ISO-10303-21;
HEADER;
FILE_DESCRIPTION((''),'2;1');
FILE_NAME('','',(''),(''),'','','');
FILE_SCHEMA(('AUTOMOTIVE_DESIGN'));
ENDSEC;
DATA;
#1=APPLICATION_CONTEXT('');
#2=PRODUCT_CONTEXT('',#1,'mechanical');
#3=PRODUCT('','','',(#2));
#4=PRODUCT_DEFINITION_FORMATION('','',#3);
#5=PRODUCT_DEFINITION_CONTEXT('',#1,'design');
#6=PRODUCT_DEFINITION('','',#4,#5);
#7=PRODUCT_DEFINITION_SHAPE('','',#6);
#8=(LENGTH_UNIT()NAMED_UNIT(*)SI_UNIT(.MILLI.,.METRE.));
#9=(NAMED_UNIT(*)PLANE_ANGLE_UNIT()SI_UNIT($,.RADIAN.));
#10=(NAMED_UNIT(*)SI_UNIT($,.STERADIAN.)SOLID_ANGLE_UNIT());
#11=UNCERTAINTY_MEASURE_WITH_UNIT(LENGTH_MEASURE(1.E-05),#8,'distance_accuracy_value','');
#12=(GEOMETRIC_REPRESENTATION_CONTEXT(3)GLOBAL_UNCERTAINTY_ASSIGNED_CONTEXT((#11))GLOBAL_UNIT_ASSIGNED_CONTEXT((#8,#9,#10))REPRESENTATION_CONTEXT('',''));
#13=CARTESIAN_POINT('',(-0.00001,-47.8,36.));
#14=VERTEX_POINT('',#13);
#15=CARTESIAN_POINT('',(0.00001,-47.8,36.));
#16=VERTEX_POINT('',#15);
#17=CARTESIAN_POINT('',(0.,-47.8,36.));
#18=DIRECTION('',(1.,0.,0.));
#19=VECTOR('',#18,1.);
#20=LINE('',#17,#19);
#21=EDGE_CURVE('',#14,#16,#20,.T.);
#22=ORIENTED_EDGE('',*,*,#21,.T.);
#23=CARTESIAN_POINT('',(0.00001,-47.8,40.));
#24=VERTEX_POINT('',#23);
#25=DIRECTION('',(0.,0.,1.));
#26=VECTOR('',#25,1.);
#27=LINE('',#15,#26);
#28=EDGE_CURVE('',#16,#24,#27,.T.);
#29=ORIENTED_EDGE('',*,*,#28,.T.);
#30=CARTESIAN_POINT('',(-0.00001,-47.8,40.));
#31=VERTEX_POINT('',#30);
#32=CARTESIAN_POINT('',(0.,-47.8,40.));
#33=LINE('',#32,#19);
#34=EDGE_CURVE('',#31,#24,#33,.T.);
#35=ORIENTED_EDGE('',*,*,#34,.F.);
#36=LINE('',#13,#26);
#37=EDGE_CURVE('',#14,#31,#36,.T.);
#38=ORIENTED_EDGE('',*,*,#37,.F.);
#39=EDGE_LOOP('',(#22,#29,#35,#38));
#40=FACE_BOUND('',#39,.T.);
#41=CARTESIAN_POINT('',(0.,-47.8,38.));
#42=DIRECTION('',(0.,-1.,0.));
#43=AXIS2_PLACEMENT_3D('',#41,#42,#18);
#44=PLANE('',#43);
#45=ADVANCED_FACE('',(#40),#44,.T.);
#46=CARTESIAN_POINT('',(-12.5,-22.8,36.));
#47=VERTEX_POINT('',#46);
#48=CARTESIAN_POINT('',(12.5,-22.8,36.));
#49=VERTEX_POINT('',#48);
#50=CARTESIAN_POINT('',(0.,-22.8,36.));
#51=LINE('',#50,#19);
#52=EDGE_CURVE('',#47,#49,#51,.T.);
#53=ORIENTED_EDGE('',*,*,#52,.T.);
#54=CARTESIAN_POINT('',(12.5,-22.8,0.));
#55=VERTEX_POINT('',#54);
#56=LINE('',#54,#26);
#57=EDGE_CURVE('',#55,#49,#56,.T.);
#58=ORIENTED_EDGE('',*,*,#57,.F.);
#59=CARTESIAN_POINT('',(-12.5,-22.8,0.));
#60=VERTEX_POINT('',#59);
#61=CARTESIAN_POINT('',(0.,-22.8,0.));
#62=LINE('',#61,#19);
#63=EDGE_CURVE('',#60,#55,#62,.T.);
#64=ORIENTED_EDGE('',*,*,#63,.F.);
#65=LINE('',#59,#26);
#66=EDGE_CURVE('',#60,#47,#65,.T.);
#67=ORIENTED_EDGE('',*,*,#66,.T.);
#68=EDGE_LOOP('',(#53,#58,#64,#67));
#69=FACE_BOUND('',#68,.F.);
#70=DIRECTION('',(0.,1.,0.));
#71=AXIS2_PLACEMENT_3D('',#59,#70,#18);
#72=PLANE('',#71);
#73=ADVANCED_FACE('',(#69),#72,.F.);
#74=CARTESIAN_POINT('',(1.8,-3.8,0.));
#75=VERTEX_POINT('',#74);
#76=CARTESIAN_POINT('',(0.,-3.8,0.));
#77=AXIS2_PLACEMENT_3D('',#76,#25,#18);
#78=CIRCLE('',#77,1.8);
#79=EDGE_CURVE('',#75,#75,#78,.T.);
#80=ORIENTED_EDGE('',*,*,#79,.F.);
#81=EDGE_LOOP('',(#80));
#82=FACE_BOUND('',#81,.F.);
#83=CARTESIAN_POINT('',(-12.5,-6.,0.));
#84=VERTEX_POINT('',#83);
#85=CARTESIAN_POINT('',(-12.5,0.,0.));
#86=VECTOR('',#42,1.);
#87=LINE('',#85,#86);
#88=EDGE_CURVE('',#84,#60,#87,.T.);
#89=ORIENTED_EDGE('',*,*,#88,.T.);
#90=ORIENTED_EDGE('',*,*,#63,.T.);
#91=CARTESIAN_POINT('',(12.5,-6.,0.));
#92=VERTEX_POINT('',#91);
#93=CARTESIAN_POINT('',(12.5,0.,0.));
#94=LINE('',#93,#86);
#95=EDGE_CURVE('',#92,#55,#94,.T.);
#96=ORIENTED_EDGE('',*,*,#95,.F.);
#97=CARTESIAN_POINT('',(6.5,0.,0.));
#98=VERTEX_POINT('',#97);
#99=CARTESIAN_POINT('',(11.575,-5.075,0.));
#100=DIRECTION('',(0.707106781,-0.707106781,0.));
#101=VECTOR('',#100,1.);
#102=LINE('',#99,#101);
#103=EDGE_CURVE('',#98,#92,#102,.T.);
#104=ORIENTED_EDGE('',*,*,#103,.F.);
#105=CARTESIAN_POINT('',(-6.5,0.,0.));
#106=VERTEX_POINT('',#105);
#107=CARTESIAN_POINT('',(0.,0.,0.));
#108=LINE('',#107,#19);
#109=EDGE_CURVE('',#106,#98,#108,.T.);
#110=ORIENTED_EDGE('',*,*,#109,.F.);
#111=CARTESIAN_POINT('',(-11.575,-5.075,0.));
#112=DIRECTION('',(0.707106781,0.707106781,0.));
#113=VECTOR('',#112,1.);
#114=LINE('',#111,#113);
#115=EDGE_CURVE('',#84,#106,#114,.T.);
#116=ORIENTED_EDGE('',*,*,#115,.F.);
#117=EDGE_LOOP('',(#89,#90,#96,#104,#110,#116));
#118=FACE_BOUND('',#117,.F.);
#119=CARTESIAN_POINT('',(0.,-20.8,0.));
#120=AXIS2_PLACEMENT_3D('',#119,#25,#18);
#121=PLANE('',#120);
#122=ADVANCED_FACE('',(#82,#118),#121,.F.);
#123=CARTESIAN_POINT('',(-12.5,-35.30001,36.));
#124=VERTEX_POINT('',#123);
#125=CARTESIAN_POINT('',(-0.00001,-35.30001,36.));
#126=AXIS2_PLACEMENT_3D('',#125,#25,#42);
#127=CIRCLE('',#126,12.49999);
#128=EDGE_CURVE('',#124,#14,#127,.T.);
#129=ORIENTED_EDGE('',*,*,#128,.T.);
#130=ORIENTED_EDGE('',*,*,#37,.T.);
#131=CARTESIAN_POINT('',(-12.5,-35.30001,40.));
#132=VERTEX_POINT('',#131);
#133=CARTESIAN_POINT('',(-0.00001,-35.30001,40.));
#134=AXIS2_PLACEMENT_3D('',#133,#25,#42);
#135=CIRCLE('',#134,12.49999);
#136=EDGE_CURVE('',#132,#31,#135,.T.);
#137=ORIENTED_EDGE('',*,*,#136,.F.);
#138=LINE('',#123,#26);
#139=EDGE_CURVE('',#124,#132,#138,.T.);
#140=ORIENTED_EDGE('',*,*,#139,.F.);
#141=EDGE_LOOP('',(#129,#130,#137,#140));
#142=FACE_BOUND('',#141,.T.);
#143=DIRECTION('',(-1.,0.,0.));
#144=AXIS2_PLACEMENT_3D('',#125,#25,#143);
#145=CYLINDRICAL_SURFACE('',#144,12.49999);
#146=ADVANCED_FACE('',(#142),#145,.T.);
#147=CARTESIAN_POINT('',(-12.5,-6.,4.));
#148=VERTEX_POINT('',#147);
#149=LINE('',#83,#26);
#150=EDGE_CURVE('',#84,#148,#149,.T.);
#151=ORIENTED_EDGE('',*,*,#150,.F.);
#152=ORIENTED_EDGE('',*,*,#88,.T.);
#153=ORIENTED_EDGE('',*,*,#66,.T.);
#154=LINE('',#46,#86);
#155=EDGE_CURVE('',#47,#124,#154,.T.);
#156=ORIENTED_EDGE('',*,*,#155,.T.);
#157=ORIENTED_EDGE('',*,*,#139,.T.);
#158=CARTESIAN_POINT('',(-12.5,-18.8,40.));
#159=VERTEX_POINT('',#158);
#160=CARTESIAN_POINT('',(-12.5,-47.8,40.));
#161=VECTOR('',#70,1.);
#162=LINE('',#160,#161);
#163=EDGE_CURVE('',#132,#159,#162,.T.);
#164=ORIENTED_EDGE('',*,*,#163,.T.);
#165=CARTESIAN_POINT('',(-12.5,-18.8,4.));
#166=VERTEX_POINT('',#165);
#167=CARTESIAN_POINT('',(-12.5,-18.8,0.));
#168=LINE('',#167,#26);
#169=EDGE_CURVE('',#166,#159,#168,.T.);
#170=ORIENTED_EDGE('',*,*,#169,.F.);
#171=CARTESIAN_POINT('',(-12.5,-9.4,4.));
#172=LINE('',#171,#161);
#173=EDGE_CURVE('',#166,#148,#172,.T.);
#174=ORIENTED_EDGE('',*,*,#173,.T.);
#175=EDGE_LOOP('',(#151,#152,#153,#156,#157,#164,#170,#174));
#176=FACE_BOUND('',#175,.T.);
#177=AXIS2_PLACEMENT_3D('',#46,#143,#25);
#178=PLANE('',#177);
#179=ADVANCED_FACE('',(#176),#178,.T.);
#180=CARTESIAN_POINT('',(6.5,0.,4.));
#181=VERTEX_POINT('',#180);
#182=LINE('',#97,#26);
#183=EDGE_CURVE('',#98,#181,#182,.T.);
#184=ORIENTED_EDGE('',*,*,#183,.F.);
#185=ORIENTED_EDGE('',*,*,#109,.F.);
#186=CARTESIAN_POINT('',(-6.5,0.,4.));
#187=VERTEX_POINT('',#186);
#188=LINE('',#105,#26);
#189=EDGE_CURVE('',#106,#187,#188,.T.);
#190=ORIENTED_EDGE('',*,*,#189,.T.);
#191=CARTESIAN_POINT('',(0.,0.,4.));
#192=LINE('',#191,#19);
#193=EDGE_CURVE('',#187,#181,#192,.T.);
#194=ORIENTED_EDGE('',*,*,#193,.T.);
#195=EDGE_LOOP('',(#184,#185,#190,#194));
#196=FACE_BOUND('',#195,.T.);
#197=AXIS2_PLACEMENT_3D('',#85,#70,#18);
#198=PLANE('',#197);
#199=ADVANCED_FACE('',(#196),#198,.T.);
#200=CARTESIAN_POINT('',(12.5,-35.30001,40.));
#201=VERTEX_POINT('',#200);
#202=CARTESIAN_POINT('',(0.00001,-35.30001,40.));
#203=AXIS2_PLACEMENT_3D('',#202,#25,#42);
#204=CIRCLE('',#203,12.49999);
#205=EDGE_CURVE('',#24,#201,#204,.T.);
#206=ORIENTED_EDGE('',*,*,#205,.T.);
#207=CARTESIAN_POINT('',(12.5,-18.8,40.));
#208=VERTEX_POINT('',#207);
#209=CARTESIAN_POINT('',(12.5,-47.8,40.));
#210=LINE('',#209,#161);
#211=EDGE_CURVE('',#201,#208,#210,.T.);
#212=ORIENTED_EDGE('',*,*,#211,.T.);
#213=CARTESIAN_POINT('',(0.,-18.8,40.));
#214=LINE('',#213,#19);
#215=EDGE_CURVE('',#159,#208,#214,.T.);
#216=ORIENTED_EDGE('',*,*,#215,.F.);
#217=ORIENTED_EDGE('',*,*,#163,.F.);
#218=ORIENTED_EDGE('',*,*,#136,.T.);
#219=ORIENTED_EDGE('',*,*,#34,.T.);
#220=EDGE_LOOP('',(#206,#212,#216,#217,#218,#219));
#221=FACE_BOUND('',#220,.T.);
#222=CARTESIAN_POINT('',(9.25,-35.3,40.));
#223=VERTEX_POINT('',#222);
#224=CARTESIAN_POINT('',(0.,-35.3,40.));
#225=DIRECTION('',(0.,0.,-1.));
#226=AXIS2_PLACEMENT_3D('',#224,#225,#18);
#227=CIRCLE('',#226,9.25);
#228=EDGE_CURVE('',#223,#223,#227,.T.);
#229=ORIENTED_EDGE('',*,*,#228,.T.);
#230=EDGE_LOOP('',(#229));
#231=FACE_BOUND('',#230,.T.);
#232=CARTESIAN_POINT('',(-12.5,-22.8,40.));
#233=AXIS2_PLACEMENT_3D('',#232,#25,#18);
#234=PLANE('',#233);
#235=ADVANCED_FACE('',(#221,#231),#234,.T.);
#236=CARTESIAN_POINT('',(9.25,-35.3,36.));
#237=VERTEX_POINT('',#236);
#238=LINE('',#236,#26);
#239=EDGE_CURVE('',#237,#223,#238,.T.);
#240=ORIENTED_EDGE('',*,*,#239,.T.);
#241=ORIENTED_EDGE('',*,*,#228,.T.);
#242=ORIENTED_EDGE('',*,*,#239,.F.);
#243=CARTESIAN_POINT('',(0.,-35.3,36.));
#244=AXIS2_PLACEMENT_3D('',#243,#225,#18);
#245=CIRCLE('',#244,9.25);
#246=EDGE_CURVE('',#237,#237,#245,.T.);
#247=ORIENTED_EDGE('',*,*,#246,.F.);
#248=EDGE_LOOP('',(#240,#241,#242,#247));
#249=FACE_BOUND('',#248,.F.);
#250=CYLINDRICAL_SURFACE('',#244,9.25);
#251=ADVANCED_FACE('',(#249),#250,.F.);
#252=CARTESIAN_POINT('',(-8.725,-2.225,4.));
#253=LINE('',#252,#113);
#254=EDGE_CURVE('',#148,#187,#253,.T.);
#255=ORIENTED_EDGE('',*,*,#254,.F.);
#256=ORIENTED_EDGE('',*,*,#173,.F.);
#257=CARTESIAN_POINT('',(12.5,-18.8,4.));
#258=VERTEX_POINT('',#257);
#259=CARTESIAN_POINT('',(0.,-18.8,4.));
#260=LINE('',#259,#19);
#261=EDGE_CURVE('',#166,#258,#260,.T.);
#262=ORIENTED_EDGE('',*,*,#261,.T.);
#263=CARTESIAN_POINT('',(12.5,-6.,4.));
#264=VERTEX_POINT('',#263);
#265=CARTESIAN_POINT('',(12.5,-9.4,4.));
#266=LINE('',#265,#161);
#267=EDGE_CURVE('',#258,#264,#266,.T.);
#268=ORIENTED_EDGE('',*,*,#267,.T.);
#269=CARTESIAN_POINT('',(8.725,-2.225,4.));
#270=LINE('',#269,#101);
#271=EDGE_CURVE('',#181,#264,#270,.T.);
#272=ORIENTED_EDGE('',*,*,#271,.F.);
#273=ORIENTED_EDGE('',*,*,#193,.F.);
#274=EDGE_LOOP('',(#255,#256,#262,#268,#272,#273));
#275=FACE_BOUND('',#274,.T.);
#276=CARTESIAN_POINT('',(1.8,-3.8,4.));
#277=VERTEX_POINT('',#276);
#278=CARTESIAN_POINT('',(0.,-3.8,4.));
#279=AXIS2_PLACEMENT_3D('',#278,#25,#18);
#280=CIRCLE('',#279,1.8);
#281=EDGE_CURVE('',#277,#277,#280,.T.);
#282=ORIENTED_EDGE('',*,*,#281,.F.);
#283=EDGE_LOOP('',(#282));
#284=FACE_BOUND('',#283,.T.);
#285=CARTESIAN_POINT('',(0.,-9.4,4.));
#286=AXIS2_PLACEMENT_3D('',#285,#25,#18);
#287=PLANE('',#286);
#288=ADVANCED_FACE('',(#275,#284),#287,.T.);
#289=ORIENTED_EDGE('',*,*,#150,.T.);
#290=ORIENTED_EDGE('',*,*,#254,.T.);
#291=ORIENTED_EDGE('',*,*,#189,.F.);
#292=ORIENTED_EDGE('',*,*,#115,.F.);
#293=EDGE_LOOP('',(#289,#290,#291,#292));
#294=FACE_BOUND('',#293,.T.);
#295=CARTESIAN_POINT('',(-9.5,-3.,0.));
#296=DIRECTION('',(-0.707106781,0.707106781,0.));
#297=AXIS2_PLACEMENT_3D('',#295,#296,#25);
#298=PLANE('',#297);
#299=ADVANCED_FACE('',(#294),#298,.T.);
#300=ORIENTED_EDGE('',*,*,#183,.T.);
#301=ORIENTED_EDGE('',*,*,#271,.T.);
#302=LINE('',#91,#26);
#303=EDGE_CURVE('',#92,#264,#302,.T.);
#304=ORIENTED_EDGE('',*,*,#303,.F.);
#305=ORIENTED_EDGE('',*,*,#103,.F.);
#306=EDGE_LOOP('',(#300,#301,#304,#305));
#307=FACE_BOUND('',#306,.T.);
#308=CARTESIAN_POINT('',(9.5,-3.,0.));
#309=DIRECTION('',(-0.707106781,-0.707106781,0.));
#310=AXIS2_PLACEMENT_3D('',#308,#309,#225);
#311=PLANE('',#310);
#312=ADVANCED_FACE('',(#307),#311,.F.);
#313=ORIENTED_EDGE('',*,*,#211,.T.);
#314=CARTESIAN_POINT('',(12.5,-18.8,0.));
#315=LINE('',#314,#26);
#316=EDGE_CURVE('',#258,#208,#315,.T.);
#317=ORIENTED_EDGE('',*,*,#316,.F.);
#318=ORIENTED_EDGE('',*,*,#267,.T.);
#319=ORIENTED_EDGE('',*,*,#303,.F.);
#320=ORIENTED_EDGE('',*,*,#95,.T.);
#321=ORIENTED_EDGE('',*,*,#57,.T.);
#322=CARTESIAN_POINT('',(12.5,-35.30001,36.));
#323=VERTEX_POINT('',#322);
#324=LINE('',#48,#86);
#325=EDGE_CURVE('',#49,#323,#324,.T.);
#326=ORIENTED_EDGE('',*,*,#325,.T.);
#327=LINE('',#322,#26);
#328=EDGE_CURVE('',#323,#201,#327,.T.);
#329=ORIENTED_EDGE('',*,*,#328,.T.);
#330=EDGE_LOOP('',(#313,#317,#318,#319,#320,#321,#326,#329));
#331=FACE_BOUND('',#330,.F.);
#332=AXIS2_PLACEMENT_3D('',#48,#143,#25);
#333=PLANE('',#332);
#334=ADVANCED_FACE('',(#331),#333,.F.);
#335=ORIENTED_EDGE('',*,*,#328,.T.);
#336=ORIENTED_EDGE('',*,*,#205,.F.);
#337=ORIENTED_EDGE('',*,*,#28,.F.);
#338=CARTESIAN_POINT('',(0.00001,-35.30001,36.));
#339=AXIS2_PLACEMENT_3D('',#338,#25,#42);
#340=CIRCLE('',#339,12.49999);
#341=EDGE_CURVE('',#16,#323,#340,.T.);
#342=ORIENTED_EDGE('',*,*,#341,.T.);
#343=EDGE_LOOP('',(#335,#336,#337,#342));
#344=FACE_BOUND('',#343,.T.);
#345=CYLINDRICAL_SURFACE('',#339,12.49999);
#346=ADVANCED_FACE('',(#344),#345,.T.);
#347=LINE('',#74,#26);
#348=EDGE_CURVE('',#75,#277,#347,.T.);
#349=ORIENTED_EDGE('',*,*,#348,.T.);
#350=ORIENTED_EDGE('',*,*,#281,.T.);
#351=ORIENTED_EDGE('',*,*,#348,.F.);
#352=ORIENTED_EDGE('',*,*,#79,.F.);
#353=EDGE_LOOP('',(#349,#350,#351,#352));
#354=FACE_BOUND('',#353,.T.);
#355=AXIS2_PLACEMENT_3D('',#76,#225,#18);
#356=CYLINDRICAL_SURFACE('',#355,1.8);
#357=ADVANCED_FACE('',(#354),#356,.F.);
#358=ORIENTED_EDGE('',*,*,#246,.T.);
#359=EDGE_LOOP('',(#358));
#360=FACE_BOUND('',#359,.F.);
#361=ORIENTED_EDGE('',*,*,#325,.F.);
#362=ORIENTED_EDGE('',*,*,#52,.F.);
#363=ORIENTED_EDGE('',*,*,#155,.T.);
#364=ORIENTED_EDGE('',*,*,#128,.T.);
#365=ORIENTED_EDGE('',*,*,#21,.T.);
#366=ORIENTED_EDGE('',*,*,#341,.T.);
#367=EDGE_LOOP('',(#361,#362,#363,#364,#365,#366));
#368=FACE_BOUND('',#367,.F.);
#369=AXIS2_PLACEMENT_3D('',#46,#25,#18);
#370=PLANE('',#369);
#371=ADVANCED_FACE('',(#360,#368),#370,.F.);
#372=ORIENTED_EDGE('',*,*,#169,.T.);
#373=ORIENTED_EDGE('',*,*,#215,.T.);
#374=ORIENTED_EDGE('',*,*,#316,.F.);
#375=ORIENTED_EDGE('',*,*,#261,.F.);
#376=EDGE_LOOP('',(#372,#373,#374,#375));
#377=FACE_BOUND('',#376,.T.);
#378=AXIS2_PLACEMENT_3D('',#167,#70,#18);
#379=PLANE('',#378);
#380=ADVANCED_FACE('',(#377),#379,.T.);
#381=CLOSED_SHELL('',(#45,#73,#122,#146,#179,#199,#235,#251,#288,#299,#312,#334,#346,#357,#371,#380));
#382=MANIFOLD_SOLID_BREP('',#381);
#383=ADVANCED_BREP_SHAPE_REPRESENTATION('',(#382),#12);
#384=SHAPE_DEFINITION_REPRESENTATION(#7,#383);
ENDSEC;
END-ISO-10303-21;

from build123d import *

# Parameters (mm, degrees)
F0_W     = 25
F0_H     = 18.8
F0_R     = 1.8
F1_DEPTH = 4
F0_H_2   = 4
F2_DEPTH = 40
F3_W     = 25
F3_H     = 4
F4_DEPTH = 25
F5_R     = 9.25
F6_DEPTH = 4
F7_R     = 12.49999
F8_SIZE  = 6


# Not quite as in the source:
# - a fillet or chamfer is up to 0.001 mm smaller than in the source, because OpenCascade refuses the exact size


with BuildPart() as f1:
    # F0 (on Top) → F1 (new body)
    with BuildSketch(Plane.XY):
        with Locations((0, -9.4)):
            Rectangle(F0_W, F0_H)
        with Locations((0, -3.8)):
            Circle(F0_R, mode=Mode.SUBTRACT)
    extrude(amount=F1_DEPTH)

    # F0 (on Top) → F2 (join)
    with BuildSketch(Plane.XY):
        with Locations((0, -20.8)):
            Rectangle(F0_W, F0_H_2)
    extrude(amount=F2_DEPTH)

    # F3 (on face) → F4 (join)
    with BuildSketch(Plane.XZ.offset(22.8)):
        with Locations((0, 38)):
            Rectangle(F3_W, F3_H)
    extrude(amount=F4_DEPTH)

    # F5 (on face) → F6 (cut, through all)
    with BuildSketch(Plane(origin=(0, 0, 36), x_dir=(1, 0, 0), z_dir=(0, 0, -1))):
        with Locations((0, 35.3)):
            Circle(F5_R)
    extrude(amount=-F6_DEPTH, mode=Mode.SUBTRACT)

    # F7 (radius 12.5 in the source; OpenCascade refuses exactly that, so slightly less here)
    f7_edges = [f1.edges().sort_by_distance(p)[0] for p in [
        (12.5, -47.8, 38),
        (-12.5, -47.8, 38),
    ]]
    fillet(f7_edges, radius=F7_R)

    # F8
    f8_edges = [f1.edges().sort_by_distance(p)[0] for p in [
        (12.5, 0, 2),
        (-12.5, 0, 2),
    ]]
    chamfer(f8_edges, length=F8_SIZE)


solid = f1.part
